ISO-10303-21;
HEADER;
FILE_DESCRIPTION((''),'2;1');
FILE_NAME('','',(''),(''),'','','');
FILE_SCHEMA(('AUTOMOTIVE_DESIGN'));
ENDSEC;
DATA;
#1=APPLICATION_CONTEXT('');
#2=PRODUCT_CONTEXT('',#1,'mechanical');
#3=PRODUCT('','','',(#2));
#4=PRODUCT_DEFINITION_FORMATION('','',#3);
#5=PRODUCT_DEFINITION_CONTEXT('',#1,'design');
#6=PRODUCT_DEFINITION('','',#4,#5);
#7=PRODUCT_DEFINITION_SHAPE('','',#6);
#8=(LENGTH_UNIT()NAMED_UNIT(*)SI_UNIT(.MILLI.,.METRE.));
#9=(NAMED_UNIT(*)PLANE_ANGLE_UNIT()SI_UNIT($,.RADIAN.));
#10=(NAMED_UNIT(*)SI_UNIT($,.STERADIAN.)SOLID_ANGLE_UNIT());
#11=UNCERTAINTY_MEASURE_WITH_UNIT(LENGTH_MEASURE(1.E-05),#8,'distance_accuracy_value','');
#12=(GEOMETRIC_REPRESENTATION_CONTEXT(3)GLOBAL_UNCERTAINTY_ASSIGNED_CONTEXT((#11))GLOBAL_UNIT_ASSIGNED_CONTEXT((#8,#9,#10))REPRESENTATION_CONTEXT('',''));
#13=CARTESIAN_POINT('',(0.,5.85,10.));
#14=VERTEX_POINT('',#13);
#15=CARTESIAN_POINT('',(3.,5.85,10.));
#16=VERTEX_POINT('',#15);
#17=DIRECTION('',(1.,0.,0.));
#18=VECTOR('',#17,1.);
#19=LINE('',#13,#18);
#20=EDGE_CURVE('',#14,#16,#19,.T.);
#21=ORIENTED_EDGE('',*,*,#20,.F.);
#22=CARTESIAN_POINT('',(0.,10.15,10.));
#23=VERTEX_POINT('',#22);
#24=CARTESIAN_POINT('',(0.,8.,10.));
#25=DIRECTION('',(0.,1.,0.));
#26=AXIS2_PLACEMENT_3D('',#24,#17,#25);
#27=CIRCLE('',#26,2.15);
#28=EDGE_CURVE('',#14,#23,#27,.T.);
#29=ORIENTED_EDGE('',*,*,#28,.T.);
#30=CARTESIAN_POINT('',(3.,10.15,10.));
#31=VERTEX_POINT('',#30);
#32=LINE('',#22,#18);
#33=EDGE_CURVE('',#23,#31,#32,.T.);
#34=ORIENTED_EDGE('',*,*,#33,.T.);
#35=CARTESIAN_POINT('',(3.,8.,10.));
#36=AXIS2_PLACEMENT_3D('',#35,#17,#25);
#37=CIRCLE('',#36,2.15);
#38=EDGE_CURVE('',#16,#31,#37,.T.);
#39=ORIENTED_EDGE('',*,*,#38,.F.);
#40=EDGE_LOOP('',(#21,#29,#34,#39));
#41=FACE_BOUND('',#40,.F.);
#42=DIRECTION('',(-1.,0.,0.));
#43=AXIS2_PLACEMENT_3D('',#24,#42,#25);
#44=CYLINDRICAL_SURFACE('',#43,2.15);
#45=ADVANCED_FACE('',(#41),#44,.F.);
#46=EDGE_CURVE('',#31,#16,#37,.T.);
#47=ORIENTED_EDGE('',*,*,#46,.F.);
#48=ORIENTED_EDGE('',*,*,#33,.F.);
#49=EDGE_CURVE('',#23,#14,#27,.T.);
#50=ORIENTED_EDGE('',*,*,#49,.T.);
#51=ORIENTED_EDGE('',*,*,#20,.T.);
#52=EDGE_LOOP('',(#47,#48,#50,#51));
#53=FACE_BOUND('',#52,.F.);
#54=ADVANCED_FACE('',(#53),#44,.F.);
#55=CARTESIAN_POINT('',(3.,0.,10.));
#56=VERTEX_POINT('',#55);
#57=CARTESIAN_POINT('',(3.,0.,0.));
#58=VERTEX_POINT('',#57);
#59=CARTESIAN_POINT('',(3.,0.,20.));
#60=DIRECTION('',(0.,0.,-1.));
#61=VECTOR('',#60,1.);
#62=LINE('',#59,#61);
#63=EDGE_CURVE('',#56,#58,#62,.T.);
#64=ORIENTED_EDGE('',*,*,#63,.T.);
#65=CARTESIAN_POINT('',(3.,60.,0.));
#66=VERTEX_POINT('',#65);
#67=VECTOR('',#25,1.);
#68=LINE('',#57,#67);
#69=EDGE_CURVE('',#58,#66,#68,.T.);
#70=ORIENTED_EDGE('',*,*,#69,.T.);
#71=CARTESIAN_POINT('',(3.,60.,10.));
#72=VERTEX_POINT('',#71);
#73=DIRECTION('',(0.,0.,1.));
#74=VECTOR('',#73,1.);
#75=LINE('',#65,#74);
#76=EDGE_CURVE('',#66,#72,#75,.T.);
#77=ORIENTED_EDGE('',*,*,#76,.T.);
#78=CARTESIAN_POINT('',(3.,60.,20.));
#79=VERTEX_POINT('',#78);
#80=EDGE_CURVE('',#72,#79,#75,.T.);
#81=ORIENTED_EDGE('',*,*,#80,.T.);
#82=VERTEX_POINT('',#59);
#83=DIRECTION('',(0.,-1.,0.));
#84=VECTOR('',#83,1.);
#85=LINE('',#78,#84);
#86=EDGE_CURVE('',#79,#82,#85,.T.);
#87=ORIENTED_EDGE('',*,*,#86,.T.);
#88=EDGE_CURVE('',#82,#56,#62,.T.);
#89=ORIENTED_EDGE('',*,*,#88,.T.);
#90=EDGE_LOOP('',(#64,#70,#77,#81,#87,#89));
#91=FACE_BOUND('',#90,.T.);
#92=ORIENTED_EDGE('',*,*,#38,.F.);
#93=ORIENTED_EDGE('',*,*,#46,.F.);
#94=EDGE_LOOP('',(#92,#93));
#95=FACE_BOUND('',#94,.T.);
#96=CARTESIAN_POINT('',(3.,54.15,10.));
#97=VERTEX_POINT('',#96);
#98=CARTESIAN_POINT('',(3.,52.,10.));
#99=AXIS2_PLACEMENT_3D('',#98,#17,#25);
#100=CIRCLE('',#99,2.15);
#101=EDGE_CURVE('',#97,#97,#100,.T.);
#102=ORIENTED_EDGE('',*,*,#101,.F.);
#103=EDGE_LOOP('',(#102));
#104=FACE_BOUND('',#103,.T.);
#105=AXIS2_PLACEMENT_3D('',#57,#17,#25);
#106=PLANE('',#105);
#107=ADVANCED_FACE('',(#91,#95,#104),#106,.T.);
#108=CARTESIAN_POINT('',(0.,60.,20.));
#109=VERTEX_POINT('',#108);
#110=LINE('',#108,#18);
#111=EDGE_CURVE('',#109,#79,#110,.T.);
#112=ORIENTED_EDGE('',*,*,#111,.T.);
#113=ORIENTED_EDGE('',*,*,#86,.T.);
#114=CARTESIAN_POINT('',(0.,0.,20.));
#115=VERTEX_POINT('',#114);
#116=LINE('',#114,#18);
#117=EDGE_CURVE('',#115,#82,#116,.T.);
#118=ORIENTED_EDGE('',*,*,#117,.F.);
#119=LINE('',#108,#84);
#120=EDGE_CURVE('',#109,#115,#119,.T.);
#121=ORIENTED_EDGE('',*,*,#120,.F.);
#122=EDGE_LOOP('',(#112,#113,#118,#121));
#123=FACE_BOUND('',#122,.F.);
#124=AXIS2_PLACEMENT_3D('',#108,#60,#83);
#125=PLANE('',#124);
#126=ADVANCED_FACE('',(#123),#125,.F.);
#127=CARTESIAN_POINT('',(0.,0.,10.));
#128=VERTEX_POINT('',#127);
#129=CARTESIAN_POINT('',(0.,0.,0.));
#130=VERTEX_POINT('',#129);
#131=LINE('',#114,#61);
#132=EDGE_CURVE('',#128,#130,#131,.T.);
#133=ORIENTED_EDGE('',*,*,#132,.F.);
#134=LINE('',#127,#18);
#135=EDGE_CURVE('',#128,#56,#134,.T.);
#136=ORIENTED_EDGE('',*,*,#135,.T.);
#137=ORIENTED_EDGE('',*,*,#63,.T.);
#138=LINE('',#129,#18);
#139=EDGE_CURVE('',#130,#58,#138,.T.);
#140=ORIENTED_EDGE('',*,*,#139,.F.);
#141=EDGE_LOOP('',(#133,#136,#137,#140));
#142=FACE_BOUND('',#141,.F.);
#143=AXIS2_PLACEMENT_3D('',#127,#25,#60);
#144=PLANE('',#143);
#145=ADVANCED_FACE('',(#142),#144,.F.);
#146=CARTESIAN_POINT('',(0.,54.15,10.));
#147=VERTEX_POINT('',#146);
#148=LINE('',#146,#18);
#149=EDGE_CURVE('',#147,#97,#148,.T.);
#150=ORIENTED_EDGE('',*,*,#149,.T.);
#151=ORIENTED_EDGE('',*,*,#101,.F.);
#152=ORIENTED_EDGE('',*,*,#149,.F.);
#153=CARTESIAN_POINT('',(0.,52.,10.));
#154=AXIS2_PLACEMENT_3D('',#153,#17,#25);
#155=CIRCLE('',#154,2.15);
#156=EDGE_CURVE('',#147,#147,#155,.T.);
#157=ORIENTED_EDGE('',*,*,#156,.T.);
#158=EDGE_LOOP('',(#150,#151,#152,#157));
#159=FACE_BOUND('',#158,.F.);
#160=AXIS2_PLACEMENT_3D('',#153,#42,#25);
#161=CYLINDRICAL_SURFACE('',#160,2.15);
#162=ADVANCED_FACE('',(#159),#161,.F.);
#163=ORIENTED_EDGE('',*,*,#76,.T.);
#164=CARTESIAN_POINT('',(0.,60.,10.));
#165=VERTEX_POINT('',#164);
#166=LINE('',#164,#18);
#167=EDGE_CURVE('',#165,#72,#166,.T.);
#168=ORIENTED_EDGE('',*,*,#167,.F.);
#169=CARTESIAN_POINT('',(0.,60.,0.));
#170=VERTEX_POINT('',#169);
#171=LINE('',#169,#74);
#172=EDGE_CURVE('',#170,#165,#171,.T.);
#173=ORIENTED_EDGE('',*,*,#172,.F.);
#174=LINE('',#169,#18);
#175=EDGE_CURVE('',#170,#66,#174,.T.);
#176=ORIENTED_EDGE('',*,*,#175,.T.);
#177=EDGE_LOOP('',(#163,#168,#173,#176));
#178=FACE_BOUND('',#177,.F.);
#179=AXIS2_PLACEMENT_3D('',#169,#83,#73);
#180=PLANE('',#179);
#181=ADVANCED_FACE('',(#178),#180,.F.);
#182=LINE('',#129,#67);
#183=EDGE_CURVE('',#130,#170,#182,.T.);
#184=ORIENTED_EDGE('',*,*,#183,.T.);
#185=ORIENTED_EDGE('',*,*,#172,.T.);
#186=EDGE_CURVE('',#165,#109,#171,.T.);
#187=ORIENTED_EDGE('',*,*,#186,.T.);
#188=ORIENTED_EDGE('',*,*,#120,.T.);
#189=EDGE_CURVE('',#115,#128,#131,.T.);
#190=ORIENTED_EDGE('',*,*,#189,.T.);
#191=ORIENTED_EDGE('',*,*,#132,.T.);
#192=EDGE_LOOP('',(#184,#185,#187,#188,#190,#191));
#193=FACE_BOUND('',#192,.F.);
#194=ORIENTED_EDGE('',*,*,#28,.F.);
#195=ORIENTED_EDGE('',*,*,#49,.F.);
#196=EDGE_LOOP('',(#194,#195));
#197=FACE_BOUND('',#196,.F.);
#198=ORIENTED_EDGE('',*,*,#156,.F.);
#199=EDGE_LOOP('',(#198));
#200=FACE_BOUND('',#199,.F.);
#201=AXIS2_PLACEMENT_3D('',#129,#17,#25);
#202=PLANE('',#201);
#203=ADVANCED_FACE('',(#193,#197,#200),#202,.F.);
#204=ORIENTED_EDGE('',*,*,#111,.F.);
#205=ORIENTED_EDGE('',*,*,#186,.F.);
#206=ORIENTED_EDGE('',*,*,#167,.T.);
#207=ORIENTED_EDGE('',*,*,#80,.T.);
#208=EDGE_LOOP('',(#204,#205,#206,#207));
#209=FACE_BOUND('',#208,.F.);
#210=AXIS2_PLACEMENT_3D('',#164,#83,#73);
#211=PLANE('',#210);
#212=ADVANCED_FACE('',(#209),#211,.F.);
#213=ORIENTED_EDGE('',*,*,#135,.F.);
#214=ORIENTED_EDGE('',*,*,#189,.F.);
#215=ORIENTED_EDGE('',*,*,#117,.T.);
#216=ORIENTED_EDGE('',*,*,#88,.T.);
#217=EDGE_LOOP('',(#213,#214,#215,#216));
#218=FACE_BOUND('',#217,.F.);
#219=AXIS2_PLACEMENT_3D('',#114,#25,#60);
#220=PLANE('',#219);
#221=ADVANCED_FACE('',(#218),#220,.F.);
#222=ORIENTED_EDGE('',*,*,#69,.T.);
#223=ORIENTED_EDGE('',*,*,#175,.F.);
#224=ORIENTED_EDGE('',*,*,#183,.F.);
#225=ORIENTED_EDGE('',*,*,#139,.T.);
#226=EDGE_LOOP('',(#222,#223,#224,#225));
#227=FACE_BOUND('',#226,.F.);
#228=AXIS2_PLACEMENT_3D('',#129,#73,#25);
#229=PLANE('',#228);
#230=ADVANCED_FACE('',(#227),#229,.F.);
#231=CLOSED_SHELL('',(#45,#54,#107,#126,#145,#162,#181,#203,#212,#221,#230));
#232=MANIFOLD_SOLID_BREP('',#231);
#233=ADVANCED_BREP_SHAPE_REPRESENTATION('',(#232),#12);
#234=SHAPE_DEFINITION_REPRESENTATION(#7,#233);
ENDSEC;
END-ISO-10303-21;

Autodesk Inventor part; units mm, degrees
ref_plane "YZ Plane" through (0, 0, 0) normal (1, 0, 0) x (0, 1, 0)
ref_plane "XZ Plane" through (0, 0, 0) normal (0, 1, 0) x (-1, 0, 0)
ref_plane "XY Plane" through (0, 0, 0) normal (0, 0, 1) x (1, 0, 0)
sketch "Sketch1" plane through (0, 0, 0) normal (1, 0, 0) x (0, 1, 0)
  line L0 (0, 0) -> (60, 0)
  line L1 (60, 0) -> (60, 20)
  line L2 (60, 20) -> (0, 20)
  line L3 (0, 20) -> (0, 0)
  line L4 (0, 10) -> (8, 10)
  line L5 (60, 10) -> (52, 10)
  circle A0 centre (52, 10) radius 2.15
  circle A1 centre (8, 10) radius 2.15
  dimension "d0" = 60
  dimension "d1" = 20
  dimension "d2" = 8
  dimension "d3" = 8
  dimension "d4" = 4.3
  dimension "d5" = 4.3
extrude "Extrusion1" add sketch "Sketch1" along normal blind 3
properties part number "BedBeltMount2"
